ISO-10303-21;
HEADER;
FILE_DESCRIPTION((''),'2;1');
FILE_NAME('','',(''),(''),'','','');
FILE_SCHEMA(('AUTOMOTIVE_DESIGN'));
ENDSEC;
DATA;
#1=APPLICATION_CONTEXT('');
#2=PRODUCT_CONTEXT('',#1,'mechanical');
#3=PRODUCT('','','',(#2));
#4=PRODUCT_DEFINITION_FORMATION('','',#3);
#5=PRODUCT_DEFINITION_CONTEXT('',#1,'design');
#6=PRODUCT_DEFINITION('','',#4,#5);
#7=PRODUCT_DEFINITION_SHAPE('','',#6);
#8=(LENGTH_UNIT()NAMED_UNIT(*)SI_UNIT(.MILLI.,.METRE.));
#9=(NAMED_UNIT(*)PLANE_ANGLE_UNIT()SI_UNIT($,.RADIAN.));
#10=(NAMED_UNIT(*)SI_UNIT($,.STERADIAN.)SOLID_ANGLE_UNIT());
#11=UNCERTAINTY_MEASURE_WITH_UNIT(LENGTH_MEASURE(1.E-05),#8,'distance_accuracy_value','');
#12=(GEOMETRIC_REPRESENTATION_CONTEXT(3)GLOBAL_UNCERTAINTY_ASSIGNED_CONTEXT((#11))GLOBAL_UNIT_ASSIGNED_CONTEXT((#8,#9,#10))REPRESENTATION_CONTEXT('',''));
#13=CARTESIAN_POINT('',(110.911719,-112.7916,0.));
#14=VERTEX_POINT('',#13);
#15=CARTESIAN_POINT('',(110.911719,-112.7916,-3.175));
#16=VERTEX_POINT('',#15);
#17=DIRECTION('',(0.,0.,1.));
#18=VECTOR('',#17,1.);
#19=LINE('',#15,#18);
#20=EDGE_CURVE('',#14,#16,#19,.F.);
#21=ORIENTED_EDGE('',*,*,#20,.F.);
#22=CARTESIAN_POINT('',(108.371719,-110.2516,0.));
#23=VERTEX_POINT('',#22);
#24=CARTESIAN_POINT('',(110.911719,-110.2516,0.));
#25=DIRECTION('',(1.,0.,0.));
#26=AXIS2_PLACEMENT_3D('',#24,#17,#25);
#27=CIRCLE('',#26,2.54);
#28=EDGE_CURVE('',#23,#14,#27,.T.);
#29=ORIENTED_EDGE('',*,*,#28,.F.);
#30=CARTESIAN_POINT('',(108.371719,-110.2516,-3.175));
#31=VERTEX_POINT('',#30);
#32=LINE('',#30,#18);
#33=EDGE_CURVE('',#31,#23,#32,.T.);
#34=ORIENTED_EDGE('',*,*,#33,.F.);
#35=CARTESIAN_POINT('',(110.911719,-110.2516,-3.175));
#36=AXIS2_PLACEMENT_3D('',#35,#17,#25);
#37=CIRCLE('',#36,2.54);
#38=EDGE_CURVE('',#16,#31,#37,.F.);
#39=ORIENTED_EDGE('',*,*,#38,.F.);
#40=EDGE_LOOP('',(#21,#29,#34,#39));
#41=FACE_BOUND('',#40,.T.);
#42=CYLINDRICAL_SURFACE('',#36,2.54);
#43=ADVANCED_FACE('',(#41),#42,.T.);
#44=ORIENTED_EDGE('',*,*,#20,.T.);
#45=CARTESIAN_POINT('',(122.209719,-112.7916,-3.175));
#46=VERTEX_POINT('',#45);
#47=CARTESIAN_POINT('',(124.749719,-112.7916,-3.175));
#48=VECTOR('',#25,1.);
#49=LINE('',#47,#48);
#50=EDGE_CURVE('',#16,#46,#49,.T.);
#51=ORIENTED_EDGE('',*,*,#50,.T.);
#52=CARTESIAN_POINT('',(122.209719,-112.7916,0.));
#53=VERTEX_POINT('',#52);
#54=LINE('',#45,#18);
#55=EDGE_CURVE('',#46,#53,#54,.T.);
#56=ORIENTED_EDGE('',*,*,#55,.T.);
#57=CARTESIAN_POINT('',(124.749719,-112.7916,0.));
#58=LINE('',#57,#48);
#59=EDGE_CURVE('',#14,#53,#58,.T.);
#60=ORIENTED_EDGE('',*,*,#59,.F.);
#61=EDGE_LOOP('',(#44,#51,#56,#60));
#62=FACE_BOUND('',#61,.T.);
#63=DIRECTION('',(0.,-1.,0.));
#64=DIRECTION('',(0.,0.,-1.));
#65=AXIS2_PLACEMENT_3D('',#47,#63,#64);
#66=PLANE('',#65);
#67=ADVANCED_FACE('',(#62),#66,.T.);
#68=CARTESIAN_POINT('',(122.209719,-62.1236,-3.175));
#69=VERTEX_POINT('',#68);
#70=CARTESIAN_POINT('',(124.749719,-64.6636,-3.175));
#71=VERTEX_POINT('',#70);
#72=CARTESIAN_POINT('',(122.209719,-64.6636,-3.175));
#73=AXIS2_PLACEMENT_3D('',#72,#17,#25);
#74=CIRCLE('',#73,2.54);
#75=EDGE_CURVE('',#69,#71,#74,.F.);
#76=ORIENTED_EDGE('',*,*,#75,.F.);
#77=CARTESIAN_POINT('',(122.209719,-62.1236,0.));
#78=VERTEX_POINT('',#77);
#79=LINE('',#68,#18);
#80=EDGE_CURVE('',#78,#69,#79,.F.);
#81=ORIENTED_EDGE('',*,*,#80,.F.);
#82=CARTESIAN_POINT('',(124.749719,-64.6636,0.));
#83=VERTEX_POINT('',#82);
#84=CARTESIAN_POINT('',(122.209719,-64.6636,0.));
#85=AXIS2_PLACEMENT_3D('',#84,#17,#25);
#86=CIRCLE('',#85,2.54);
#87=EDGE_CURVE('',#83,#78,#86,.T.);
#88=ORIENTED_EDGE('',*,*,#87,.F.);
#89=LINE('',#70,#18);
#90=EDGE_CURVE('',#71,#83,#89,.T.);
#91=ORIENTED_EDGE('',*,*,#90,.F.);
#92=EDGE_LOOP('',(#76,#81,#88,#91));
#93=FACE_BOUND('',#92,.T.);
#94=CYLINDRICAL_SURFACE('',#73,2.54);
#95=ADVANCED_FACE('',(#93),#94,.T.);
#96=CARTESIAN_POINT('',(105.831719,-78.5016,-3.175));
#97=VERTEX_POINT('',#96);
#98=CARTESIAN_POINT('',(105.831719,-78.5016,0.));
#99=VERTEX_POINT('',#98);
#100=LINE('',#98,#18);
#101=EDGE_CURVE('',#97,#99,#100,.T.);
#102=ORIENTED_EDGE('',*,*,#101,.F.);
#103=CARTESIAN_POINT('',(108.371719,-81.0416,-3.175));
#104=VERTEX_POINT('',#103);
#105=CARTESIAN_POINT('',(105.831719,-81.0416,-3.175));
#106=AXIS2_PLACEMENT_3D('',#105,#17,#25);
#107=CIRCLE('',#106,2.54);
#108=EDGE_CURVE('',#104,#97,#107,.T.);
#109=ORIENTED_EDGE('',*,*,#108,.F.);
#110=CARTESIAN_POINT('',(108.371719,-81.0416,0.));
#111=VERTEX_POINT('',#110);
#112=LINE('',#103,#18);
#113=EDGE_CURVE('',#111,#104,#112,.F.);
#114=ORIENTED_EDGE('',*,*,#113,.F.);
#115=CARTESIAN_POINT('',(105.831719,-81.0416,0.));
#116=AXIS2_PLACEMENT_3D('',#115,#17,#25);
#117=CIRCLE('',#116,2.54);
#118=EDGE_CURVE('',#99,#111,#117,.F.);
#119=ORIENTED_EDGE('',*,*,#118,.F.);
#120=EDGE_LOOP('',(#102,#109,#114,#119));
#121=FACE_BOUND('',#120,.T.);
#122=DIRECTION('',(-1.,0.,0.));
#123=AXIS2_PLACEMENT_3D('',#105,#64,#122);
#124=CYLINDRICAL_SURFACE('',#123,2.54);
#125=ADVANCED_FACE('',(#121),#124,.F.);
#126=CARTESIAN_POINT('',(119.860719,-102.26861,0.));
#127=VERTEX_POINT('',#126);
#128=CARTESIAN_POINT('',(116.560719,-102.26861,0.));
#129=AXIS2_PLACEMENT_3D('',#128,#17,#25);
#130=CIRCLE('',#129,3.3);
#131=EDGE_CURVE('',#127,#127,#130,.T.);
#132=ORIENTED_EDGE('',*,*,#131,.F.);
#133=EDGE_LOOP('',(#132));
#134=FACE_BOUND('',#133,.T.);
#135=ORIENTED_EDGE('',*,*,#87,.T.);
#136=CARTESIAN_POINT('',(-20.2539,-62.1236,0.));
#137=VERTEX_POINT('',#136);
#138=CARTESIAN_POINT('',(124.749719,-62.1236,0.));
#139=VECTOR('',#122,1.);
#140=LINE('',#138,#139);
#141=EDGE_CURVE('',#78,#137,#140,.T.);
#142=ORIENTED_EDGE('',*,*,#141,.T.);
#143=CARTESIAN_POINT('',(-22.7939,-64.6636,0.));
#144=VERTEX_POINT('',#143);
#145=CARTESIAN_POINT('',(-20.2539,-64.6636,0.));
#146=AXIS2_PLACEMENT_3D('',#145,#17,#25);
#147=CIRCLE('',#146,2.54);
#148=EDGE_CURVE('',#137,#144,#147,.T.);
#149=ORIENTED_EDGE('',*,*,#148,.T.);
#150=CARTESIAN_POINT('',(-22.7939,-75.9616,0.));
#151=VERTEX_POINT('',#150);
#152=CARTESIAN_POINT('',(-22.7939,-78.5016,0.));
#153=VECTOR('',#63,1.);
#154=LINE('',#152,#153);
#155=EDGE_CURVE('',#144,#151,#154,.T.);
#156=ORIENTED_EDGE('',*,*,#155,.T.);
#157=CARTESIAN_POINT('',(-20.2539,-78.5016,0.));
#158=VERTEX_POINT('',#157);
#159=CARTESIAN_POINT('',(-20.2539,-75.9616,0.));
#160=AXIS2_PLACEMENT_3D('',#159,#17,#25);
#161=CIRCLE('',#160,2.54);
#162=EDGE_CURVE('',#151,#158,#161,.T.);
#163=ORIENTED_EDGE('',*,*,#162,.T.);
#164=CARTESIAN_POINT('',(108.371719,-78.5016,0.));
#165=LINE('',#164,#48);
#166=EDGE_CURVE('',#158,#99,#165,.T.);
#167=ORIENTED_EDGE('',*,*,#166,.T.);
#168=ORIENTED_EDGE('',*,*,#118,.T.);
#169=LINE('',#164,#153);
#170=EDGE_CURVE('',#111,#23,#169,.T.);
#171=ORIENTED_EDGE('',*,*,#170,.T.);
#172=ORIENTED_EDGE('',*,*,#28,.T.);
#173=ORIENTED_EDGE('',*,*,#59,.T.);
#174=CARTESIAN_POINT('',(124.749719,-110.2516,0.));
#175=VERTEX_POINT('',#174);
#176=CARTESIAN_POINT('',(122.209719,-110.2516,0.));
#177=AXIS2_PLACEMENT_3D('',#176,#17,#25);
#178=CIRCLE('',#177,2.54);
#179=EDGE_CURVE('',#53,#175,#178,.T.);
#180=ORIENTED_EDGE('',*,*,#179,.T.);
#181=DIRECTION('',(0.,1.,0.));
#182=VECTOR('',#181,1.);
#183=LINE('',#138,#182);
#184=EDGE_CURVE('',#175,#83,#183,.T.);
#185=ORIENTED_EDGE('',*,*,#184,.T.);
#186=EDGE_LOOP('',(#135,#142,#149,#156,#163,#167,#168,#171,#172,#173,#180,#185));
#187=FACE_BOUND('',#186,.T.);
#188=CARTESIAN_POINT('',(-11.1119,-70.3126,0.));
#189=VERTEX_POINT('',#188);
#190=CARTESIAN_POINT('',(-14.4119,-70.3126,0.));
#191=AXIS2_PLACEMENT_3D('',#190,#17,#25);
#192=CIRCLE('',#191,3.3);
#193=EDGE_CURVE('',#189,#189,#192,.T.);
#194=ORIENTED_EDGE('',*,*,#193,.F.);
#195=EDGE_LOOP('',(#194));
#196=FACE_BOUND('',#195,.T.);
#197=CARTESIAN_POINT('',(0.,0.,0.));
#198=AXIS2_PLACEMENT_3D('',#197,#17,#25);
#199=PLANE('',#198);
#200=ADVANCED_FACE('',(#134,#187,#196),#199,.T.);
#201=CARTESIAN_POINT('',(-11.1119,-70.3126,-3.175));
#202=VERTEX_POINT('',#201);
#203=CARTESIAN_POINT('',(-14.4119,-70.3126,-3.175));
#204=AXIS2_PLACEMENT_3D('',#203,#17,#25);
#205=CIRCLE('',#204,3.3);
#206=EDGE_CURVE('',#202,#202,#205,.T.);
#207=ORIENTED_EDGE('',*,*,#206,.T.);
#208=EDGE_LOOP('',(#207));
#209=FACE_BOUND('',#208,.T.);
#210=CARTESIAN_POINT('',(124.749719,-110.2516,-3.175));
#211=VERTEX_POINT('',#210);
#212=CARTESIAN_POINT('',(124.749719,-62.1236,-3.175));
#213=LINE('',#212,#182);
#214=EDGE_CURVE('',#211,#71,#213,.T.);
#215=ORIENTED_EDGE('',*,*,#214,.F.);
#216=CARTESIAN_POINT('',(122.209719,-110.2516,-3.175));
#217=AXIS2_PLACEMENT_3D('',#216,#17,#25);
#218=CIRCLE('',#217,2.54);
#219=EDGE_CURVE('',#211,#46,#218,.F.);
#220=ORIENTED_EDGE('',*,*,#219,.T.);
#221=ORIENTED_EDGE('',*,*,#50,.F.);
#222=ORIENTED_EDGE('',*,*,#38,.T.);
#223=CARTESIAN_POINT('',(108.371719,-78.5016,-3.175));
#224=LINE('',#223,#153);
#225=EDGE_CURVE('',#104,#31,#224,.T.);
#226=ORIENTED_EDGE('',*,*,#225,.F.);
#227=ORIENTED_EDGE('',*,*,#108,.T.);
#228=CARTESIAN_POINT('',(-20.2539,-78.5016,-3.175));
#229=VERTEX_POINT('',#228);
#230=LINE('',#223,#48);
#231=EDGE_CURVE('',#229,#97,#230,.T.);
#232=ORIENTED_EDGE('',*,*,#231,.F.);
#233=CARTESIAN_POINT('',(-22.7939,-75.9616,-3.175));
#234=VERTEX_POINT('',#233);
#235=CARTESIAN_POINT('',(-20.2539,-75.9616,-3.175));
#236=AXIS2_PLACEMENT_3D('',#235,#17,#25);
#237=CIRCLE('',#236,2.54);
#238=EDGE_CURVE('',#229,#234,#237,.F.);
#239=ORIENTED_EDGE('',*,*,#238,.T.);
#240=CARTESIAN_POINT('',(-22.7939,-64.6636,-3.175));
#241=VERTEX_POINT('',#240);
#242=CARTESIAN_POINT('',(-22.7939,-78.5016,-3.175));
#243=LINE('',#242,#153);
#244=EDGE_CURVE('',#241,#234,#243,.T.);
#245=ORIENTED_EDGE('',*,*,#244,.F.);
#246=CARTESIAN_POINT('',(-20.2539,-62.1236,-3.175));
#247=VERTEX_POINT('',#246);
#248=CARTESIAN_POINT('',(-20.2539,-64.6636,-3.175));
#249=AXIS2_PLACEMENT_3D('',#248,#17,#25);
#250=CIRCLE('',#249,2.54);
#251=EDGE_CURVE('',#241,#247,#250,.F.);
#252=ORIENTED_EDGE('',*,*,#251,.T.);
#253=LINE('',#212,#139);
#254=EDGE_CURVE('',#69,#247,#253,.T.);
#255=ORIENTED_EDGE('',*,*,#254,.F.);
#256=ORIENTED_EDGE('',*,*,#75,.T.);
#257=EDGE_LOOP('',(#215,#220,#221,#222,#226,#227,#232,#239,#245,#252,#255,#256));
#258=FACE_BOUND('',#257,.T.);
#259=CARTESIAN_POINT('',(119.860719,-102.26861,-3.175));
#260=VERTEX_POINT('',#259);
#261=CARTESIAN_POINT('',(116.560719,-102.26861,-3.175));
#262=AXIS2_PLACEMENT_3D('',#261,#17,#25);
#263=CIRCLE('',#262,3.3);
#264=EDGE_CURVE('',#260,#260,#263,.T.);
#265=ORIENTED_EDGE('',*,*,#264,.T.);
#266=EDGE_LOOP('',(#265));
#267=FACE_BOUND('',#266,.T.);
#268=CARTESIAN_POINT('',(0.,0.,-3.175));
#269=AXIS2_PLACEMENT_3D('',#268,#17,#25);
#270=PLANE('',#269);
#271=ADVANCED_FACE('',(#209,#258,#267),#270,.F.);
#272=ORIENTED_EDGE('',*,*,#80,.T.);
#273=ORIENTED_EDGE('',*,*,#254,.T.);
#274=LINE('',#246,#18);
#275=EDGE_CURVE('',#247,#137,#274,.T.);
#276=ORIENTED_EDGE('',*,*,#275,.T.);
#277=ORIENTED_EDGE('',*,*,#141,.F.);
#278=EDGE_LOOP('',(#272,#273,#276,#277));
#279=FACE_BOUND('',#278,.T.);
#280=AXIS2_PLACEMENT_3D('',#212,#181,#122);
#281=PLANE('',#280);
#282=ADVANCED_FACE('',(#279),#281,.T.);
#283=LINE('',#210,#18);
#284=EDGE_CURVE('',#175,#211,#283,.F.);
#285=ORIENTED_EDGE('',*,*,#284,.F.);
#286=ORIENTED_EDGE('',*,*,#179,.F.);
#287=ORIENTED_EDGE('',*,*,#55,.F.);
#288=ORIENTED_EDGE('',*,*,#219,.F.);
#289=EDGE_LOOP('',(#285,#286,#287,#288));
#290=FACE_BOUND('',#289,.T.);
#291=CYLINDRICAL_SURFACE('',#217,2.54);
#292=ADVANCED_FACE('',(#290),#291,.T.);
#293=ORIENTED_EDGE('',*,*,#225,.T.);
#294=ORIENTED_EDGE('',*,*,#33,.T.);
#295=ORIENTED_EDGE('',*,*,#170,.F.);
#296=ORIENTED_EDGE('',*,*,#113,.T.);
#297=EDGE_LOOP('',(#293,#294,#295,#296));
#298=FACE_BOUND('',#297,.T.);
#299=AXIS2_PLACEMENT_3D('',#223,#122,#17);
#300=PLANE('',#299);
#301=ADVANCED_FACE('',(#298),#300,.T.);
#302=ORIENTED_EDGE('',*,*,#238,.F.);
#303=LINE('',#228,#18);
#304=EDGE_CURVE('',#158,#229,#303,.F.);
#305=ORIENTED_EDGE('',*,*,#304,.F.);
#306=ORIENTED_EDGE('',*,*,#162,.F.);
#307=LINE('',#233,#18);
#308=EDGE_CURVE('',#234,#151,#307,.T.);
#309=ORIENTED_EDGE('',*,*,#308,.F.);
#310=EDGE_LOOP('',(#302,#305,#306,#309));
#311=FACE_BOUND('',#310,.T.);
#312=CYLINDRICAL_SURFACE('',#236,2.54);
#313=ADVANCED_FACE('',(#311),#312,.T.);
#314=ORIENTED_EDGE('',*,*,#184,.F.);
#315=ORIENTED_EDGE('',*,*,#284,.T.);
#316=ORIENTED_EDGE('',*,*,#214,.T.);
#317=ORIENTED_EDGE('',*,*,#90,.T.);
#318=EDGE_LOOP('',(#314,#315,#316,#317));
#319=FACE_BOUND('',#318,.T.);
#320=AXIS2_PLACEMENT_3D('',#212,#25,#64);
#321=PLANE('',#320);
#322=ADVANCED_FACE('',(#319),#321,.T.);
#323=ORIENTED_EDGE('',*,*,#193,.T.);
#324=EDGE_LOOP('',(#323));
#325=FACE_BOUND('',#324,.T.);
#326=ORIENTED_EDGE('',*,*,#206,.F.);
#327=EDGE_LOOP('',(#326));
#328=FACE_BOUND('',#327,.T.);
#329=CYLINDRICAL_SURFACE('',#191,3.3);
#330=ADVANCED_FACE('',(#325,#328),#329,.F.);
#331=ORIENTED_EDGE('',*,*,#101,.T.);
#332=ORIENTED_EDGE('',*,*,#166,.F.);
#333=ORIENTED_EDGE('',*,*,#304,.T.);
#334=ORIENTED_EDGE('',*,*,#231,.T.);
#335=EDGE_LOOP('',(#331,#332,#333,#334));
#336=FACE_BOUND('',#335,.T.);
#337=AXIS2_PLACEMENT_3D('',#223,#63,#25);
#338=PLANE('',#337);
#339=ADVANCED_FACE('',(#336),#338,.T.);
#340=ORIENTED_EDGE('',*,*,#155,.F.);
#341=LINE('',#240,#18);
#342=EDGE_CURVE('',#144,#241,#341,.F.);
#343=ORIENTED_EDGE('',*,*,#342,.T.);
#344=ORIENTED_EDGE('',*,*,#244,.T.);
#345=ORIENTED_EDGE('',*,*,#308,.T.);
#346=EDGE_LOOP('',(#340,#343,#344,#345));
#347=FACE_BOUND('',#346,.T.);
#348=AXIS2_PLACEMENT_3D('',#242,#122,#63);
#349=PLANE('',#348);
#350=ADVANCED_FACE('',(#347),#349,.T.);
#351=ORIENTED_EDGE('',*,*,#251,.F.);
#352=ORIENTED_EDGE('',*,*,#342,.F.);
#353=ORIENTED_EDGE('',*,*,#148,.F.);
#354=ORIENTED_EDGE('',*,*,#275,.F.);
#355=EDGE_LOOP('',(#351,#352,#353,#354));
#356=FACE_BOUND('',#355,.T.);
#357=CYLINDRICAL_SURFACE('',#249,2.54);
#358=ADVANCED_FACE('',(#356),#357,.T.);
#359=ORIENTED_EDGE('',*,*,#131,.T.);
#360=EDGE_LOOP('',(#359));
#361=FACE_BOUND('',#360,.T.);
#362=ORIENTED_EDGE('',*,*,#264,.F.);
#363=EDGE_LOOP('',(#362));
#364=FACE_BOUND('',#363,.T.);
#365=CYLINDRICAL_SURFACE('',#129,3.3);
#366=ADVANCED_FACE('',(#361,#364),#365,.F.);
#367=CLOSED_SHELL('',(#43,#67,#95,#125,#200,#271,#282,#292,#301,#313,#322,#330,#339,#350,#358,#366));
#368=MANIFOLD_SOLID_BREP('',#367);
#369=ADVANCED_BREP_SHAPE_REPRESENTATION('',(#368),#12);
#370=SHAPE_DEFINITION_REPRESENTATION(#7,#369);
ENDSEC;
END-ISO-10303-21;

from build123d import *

# Parameters (mm, degrees)
BASE_FLANGE1_DEPTH   = 3.175
M6_CLEARANCE_HOLE1_D = 6.6
FILLET1_R            = 2.54


# Sheet-metal steps are written as plain solids
with BuildPart() as part:
    # Sketch1 → Base-Flange1 (new body)
    with BuildSketch(Plane.XY):
        Polygon((108.371719048, -78.501600001), (-22.7939, -78.501600001), (-22.7939, -62.123600001), (124.749719048, -62.123600001), (124.749719048, -112.791600001), (108.371719048, -112.791600001), align=None)
    extrude(amount=-BASE_FLANGE1_DEPTH)

    # M6 Clearance Hole1 (through all)
    with Locations(Plane.XY):
        with Locations((-14.4119, -70.312600001), (116.560719048, -102.268610498)):
            Hole(M6_CLEARANCE_HOLE1_D / 2)

    # Fillet1
    fillet1_edges = [part.edges().sort_by_distance(p)[0] for p in [
        (-22.7939, -62.123600001, -1.5875),
        (124.749719048, -62.123600001, -1.5875),
        (124.749719048, -112.791600001, -1.5875),
        (108.371719048, -112.791600001, -1.5875),
        (108.371719048, -78.501600001, -1.5875),
        (-22.7939, -78.501600001, -1.5875),
    ]]
    fillet(fillet1_edges, radius=FILLET1_R)


solid = part.part
